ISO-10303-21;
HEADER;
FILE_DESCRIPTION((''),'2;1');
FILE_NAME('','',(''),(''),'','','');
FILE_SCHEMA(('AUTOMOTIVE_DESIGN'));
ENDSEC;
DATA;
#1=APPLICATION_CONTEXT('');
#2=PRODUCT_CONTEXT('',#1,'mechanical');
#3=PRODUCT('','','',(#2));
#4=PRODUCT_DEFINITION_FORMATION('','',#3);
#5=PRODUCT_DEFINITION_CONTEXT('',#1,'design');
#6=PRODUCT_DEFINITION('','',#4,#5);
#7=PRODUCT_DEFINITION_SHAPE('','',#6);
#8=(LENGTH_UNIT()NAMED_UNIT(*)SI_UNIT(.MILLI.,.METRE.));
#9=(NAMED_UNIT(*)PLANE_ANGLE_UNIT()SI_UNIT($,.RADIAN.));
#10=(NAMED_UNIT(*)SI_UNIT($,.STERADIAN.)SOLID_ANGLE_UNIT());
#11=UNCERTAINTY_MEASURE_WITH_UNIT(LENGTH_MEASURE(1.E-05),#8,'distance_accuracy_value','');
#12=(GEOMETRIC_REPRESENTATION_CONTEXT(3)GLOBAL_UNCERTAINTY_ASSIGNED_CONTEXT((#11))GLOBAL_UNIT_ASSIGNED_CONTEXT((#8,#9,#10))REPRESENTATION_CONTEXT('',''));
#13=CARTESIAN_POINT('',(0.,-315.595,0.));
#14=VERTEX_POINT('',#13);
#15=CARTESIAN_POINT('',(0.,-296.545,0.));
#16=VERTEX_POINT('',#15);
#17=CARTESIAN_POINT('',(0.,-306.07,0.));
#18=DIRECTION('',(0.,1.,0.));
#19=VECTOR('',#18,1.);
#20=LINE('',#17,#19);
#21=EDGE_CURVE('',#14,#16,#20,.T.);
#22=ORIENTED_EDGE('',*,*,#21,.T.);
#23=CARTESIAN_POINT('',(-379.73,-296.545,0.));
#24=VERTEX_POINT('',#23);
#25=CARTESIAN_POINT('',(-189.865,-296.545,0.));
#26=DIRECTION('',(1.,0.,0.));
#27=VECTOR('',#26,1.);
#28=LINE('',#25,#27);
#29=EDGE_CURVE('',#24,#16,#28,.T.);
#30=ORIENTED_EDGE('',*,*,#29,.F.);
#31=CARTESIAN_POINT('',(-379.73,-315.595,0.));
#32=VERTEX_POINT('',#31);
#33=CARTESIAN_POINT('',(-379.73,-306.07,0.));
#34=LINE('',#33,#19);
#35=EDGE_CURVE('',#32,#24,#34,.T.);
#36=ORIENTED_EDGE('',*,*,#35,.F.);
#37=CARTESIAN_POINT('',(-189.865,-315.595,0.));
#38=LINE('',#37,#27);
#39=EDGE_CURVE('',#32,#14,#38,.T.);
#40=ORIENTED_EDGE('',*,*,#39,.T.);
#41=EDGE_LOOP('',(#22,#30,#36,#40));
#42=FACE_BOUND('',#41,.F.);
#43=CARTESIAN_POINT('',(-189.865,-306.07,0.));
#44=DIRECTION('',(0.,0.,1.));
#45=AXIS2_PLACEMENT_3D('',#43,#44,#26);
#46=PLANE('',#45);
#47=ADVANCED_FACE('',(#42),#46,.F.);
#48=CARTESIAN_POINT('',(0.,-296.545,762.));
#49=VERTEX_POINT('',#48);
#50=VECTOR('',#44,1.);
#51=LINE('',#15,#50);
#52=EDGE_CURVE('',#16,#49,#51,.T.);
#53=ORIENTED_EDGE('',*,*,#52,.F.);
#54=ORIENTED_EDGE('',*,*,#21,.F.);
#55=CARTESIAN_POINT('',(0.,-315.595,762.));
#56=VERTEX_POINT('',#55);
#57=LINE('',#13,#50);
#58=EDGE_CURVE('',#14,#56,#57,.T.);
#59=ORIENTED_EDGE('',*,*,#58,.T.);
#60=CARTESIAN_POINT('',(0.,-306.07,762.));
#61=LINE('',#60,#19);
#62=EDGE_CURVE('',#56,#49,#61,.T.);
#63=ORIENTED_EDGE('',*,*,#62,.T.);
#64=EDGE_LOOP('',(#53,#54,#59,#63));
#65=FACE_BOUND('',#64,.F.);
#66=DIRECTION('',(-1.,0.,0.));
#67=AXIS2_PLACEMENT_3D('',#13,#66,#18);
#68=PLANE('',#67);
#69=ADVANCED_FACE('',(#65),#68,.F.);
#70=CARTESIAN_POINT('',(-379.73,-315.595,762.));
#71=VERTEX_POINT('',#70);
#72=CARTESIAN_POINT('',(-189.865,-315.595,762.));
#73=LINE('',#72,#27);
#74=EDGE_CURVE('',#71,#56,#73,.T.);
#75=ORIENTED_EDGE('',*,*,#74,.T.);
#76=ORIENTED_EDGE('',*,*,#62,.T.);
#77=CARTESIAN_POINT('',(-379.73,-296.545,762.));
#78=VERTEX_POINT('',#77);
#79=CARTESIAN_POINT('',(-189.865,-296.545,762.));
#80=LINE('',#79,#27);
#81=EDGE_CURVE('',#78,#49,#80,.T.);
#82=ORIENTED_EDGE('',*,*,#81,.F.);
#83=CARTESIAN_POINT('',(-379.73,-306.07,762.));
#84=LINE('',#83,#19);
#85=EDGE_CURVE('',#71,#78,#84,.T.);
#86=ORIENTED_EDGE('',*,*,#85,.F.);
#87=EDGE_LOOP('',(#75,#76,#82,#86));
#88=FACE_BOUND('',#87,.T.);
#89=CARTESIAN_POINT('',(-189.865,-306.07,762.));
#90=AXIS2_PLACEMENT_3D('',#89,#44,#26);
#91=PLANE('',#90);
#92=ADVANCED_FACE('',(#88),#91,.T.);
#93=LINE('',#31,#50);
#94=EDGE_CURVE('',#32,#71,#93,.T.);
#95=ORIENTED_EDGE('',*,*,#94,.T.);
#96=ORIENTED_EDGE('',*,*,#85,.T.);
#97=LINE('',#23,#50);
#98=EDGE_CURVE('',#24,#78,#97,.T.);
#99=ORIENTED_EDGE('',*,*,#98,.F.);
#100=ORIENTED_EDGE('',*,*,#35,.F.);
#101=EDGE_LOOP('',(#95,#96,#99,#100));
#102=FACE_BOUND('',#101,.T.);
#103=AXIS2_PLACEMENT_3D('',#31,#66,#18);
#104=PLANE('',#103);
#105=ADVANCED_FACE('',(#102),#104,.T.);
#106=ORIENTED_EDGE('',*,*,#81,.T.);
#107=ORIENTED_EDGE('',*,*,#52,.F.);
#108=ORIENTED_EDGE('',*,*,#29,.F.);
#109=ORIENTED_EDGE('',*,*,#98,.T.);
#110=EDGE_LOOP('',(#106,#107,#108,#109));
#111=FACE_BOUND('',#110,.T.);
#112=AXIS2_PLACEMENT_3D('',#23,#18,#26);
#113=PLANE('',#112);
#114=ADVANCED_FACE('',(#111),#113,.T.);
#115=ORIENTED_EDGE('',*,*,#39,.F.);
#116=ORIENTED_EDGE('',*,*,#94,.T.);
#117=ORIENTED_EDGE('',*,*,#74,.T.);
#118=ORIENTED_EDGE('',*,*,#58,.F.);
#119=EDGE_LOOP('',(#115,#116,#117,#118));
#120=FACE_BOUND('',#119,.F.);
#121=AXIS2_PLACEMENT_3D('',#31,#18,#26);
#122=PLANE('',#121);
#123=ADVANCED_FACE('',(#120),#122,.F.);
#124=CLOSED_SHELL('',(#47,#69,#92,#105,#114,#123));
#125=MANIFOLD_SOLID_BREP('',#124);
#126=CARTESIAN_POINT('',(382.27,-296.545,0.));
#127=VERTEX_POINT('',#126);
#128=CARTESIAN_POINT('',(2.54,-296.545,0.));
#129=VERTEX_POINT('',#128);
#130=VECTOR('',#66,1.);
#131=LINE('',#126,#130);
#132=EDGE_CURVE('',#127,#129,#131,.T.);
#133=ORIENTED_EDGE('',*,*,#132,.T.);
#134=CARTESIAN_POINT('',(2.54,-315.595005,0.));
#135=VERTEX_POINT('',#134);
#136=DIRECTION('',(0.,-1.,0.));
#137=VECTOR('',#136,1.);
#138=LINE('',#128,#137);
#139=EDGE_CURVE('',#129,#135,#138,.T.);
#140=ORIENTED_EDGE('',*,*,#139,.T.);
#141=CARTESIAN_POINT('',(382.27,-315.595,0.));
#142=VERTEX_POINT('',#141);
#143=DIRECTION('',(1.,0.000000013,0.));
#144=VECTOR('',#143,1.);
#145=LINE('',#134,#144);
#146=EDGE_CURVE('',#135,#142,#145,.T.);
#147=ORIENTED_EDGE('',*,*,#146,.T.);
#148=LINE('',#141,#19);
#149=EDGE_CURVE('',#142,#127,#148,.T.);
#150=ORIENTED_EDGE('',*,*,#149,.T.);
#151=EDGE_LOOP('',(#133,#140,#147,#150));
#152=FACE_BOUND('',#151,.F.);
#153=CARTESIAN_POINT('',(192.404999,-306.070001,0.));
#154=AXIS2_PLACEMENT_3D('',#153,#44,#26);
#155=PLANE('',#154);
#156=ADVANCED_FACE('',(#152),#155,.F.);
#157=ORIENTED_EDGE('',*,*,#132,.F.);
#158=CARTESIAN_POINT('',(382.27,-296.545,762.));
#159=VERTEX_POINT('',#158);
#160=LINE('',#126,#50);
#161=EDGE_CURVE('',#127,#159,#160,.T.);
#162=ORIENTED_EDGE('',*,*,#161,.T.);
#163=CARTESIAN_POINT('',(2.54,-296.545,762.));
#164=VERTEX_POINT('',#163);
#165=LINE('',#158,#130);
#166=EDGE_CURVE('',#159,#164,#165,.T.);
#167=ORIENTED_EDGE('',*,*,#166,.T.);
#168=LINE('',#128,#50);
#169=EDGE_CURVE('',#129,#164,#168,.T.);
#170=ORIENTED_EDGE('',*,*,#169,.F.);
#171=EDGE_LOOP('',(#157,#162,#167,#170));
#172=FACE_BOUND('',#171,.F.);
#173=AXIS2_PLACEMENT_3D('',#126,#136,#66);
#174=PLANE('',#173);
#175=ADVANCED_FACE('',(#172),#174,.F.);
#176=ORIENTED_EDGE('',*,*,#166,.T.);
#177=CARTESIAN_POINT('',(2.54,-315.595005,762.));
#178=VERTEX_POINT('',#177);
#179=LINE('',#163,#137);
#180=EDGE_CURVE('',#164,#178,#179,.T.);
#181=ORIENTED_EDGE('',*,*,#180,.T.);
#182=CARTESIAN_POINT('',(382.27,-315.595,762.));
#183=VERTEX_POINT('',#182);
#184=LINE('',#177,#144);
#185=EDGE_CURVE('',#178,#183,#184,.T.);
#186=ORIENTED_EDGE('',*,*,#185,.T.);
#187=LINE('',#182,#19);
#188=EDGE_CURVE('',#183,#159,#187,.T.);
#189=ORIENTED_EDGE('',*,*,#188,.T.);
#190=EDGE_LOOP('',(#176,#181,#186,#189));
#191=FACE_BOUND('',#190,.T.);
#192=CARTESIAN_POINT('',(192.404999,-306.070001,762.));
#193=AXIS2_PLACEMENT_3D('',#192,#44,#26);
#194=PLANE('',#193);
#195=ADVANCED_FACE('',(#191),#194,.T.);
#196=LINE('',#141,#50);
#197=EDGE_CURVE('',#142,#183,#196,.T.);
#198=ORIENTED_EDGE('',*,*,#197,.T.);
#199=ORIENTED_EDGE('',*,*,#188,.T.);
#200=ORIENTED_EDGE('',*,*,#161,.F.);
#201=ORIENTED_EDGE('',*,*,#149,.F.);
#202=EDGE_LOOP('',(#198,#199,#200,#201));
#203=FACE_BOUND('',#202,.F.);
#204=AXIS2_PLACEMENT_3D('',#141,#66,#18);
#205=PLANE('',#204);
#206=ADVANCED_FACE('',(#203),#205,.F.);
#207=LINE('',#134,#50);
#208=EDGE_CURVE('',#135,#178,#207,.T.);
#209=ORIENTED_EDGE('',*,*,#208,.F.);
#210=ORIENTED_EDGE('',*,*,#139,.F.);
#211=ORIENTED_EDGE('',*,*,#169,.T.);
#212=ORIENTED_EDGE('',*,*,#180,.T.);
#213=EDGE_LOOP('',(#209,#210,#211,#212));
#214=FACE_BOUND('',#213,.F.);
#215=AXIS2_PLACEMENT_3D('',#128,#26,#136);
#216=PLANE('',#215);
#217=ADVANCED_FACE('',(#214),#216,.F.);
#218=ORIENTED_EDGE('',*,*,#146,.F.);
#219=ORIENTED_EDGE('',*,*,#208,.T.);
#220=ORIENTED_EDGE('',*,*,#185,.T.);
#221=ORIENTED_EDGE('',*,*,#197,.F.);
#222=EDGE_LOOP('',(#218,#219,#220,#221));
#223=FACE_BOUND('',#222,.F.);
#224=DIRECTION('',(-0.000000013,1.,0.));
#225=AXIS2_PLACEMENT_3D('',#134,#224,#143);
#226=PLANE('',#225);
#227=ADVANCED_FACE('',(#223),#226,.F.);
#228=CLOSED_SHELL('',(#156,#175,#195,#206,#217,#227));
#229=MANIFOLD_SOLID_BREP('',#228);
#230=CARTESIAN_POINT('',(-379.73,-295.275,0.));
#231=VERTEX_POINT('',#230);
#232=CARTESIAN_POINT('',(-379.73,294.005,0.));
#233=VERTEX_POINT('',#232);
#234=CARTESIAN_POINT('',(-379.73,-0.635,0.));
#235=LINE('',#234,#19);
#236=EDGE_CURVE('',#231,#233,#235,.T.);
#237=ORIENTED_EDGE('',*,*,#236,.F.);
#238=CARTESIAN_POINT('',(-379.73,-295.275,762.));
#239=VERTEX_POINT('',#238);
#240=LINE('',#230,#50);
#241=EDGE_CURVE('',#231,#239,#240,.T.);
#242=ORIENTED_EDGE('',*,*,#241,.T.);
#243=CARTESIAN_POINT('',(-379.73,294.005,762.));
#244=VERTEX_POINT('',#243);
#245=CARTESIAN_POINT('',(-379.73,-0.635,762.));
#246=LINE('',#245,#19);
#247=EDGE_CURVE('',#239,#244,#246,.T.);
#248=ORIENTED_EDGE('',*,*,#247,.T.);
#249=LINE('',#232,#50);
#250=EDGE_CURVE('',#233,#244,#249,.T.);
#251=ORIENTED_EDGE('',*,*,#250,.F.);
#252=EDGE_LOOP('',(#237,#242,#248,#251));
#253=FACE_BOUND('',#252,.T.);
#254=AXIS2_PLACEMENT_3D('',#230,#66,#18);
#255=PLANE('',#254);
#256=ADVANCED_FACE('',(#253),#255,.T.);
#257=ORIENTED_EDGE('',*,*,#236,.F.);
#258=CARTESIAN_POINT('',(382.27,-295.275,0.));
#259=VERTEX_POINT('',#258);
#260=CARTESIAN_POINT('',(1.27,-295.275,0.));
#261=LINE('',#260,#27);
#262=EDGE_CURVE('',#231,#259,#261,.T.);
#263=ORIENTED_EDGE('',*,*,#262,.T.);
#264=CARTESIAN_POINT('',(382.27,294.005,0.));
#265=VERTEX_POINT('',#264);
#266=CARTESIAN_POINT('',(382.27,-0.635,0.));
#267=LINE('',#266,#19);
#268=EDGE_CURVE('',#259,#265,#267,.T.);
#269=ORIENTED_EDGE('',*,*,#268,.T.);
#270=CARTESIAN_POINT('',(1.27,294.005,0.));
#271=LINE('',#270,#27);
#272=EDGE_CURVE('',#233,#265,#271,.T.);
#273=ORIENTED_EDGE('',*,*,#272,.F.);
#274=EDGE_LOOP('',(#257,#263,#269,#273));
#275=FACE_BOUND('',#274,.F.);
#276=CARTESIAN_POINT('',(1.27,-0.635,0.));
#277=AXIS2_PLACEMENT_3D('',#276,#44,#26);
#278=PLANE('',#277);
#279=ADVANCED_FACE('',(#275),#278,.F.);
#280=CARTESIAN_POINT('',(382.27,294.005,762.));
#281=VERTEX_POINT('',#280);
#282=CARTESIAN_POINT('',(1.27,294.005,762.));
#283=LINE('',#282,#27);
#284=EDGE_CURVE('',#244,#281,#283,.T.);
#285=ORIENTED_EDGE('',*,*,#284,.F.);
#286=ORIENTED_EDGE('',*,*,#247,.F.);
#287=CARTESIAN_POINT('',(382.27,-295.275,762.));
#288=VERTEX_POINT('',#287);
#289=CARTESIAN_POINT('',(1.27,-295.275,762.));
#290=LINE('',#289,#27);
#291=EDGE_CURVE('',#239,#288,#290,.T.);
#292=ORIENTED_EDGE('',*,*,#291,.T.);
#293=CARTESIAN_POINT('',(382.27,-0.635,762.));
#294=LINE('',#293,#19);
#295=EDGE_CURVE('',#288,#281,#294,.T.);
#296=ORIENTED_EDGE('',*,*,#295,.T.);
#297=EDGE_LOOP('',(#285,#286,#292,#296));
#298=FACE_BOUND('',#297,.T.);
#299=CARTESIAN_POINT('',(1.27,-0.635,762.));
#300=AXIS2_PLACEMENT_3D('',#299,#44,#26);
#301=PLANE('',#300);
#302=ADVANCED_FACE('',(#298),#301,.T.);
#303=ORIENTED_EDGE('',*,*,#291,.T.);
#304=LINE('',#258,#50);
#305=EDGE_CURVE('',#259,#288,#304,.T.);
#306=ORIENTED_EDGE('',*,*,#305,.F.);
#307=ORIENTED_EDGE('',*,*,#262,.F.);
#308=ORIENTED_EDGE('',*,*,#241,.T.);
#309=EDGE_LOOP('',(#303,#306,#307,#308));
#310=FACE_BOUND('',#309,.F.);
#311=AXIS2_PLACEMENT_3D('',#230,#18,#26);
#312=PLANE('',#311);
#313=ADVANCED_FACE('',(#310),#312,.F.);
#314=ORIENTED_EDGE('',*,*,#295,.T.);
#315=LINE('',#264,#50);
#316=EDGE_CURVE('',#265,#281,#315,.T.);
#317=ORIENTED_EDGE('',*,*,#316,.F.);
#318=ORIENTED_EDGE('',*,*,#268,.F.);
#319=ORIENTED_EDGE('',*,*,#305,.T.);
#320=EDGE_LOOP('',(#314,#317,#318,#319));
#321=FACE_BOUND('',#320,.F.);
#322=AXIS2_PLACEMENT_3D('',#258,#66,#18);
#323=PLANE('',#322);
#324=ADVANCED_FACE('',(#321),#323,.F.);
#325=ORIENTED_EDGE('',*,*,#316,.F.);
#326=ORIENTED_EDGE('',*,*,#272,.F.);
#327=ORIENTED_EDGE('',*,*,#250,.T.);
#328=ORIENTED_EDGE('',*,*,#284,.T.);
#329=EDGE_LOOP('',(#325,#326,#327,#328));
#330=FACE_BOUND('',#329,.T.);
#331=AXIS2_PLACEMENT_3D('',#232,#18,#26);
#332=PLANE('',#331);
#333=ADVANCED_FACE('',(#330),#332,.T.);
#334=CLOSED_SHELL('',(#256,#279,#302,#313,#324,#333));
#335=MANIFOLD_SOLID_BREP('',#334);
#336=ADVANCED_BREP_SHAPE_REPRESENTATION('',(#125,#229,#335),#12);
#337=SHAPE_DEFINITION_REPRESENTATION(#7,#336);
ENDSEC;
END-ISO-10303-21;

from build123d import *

# Parameters (mm, degrees)
F0_W     = 762
F0_H     = 589.28
F1_DEPTH = 762
F0_W_2   = 379.73
F0_H_2   = 19.05


# Not quite as in the source:
# - ends of sketch curves that miss each other by under 0.0002 mm in the source are joined


with BuildPart() as f1:
    # F0 (on Top) → F1 (new body)
    with BuildSketch(Plane.XY):
        with Locations((1.27, -0.635)):
            Rectangle(F0_W, F0_H)
    extrude(amount=F1_DEPTH)


with BuildPart() as f1b:
    # F0 (on Top) → F1, piece 2 (new body)
    with BuildSketch(Plane.XY):
        Polygon((382.27, -315.595), (382.27, -296.545), (2.54, -296.545), (2.54, -315.5950048161), align=None)
    extrude(amount=F1_DEPTH)


with BuildPart() as f1c:
    # F0 (on Top) → F1, piece 3 (new body)
    with BuildSketch(Plane.XY):
        with Locations((-189.865, -306.07)):
            Rectangle(F0_W_2, F0_H_2)
    extrude(amount=F1_DEPTH)


solid = Compound([f1.part, f1b.part, f1c.part])
